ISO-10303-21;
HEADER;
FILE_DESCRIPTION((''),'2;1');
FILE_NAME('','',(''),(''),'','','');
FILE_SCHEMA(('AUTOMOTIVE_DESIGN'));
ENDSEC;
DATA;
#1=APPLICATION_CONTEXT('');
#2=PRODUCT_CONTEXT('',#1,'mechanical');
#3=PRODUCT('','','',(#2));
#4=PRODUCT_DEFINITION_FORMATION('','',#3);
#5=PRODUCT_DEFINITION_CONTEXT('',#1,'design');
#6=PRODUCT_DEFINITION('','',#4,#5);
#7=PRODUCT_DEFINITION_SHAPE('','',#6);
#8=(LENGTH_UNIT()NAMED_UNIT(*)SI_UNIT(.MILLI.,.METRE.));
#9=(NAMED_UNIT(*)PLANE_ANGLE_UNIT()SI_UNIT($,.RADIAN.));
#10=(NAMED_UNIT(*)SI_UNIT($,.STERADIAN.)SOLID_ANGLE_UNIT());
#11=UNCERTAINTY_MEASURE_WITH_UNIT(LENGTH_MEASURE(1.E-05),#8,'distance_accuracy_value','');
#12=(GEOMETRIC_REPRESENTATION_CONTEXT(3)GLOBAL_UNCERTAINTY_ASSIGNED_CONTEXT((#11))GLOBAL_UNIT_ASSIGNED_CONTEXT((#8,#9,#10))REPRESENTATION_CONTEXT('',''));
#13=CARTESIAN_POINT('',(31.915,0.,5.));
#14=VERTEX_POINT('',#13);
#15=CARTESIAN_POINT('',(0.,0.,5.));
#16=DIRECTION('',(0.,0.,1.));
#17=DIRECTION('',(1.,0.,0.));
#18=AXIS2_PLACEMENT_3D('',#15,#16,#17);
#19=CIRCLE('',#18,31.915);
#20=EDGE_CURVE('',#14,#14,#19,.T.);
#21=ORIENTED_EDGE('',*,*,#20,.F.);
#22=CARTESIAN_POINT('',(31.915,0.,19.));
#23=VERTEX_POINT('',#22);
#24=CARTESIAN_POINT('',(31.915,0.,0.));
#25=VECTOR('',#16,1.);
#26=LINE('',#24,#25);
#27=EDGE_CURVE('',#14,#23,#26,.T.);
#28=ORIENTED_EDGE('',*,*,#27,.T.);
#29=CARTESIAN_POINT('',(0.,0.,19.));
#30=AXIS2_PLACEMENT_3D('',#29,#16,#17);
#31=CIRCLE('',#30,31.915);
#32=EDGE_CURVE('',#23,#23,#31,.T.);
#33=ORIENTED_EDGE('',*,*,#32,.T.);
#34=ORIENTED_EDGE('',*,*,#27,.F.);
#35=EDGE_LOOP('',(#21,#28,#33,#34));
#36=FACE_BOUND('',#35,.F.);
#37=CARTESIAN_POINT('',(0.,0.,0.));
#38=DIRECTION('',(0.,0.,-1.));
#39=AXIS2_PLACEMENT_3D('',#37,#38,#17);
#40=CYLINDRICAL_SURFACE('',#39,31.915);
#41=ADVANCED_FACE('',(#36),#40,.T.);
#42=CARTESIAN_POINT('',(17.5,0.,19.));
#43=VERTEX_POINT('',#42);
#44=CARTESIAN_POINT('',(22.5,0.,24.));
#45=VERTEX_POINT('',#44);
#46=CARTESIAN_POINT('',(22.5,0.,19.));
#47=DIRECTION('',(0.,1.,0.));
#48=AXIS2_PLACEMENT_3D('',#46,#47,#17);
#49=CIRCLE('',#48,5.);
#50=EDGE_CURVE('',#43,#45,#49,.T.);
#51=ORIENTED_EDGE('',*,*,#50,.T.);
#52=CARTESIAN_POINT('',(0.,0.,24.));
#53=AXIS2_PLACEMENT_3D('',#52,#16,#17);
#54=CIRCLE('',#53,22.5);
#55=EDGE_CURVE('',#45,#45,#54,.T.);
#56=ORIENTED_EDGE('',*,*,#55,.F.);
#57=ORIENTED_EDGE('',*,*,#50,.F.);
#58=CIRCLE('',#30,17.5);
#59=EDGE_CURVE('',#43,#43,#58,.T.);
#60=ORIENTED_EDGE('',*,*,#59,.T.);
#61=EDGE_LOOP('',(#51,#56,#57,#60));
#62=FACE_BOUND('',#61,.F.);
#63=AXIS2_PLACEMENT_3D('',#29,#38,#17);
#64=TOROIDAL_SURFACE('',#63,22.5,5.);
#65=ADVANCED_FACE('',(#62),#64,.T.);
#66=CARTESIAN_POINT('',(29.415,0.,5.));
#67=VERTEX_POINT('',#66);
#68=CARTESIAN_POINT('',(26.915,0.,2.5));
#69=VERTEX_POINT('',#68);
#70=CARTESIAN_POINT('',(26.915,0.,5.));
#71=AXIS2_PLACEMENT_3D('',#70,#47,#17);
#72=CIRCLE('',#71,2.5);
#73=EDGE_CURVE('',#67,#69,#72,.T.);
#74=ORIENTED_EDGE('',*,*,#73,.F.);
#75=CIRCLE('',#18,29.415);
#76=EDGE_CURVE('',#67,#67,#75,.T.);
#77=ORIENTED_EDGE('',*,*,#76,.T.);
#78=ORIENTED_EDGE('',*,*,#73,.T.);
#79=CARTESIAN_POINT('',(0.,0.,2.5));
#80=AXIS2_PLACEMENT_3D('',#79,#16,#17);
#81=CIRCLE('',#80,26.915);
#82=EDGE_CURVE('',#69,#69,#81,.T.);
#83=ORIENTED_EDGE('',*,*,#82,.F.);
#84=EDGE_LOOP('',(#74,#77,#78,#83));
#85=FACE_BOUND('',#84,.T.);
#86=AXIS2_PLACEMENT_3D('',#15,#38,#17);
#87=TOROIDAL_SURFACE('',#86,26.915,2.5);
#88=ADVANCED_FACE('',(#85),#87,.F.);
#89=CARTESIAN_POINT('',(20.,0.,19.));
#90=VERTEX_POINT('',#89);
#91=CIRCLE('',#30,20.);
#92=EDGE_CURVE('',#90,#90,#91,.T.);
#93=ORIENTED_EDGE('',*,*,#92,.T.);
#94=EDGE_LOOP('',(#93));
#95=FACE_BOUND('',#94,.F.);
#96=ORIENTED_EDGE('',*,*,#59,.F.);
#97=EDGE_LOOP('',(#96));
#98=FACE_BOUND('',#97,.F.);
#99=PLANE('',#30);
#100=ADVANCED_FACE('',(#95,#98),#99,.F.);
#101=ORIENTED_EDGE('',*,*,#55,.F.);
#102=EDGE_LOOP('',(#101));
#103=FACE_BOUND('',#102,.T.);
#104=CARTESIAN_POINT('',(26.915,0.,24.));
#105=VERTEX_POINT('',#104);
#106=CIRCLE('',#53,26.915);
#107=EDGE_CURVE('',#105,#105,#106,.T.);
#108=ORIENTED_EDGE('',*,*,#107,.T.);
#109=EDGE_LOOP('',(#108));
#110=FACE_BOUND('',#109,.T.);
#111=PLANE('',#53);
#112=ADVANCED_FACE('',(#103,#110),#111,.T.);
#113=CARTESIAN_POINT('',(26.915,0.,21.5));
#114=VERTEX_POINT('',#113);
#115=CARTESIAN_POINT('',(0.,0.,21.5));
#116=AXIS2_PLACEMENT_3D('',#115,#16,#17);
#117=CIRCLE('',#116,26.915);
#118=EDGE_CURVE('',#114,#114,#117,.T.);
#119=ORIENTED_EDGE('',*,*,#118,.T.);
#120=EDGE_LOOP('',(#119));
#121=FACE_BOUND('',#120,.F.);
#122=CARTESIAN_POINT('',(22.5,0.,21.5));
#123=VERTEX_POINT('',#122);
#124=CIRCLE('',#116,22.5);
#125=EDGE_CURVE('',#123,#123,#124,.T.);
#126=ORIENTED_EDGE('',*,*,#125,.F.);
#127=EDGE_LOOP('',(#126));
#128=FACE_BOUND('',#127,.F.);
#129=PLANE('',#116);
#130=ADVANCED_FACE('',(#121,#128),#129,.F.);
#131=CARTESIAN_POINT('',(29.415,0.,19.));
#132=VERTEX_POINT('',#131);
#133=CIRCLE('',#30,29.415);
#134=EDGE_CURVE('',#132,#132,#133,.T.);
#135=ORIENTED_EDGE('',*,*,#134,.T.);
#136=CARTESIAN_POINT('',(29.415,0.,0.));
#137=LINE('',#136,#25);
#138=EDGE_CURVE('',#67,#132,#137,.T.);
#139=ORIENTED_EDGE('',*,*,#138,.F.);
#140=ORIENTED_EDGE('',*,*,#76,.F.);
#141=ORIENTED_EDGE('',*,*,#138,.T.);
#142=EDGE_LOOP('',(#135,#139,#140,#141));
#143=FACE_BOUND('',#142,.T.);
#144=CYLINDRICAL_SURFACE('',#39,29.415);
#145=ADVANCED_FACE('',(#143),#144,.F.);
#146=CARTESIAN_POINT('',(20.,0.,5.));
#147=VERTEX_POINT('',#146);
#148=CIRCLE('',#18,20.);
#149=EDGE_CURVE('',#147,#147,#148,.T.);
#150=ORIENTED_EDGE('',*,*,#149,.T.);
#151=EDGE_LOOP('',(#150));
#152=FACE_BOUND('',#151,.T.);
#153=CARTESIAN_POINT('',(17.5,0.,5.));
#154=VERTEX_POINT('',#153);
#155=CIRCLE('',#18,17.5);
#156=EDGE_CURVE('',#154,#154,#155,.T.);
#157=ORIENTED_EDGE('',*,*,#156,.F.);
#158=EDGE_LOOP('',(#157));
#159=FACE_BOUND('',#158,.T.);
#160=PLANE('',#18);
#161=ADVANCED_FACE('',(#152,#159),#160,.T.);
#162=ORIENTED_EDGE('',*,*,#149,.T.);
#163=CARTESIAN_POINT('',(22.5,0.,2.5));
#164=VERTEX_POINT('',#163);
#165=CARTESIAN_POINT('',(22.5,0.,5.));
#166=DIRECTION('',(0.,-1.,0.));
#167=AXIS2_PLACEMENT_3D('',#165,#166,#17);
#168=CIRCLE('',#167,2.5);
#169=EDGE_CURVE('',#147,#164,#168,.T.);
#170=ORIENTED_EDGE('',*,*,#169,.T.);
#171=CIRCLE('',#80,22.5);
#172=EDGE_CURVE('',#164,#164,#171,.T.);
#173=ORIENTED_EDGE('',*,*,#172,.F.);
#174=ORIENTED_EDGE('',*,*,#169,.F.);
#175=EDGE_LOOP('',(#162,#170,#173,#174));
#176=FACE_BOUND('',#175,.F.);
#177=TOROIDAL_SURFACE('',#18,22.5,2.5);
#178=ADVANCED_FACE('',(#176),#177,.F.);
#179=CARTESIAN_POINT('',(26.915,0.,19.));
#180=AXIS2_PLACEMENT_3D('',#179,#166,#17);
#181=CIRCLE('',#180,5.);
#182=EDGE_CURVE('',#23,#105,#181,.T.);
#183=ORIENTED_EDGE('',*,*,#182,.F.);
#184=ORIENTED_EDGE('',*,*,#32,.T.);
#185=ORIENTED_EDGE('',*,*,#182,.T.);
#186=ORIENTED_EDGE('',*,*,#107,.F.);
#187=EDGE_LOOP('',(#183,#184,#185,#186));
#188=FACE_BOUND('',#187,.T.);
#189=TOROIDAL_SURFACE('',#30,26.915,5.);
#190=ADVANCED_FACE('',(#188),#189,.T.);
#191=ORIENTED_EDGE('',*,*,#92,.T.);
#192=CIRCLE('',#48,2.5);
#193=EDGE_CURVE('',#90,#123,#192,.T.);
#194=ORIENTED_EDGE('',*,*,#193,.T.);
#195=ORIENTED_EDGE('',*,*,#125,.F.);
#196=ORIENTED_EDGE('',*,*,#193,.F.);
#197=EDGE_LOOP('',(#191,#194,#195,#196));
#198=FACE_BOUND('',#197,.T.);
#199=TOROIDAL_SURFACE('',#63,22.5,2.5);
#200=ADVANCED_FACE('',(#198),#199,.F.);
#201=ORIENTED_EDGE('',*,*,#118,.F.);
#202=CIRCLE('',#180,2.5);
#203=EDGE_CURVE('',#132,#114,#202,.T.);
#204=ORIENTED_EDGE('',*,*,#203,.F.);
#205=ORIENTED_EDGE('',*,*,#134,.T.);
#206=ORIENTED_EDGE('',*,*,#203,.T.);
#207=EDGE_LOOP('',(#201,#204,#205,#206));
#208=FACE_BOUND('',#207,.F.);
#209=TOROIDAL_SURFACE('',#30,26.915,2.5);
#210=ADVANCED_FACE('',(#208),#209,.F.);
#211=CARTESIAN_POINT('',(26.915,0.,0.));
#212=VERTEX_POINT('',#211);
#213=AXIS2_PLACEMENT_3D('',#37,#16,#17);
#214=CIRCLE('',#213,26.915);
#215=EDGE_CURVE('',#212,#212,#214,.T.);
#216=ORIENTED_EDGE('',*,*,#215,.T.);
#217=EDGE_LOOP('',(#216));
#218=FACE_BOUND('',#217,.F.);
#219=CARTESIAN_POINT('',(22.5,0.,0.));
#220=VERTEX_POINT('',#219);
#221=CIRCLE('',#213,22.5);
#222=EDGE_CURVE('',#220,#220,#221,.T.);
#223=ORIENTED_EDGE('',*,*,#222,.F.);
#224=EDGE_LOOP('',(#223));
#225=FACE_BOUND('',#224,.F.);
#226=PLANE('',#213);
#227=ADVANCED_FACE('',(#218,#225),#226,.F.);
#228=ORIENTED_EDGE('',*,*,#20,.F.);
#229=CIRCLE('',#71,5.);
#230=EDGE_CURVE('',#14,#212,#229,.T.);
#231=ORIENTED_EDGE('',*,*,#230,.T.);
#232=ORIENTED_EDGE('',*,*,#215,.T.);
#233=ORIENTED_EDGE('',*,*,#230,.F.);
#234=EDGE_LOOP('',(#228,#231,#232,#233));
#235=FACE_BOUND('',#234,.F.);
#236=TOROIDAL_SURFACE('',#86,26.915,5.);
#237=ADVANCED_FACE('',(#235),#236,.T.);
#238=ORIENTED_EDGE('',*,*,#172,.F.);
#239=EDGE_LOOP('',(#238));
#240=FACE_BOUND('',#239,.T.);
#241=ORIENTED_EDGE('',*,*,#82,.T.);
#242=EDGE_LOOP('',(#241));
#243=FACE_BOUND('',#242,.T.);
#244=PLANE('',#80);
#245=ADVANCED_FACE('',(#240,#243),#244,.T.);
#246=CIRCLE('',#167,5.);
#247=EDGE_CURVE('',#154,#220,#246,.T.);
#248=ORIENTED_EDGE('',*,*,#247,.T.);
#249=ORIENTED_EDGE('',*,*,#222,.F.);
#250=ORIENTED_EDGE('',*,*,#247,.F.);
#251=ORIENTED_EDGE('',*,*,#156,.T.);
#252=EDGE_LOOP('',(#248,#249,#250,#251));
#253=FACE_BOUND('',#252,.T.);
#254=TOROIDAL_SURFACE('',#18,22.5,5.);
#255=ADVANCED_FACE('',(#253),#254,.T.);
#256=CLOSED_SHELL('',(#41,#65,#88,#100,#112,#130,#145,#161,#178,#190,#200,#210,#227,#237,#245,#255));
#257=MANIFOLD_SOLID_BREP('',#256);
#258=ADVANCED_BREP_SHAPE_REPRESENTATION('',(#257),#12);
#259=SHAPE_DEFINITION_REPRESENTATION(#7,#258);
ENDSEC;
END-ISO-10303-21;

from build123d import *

# Parameters (mm, degrees)
F0_R     = 31.915
F0_R_2   = 17.5
F1_DEPTH = 24
F2_R     = 5
F3_T     = 2.5


# Not quite as in the source:
# - a shell that OpenCascade refuses in one call is made with other operations: the cavity is built on its own and cut out


with BuildPart() as f1:
    # F0 (on Top) → F1 (new body)
    with BuildSketch(Plane.XY):
        Circle(F0_R)
        Circle(F0_R_2, mode=Mode.SUBTRACT)
    extrude(amount=F1_DEPTH)

    # F2
    f2_edges = [f1.edges().sort_by_distance(p)[0] for p in [
        (-31.915, 0, 24),
        (-17.5, 0, 24),
        (-31.915, 0, 0),
        (-17.5, 0, 0),
    ]]
    fillet(f2_edges, radius=F2_R)

    # F3: shell of thickness 2.5, made by hand


with BuildPart() as f3_core1:
    # F3_t2: copy of F1
    add(f1.part)

    # the walls: a layer under each face that stays
    f3_faces = [f3_core1.faces().sort_by_distance(p)[0] for p in [
        (-31.915, 0, 12),
        (-30.4505339059, 0, 1.4644660941),
        (-30.4505339059, 0, 22.5355339059),
        (-17.9433333333, -17.9433333333, 0),
        (-17.9433333333, -17.9433333333, 24),
        (-18.9644660941, 0, 1.4644660941),
        (-18.9644660941, 0, 22.5355339059),
    ]]
    thicken(f3_faces, amount=-F3_T, mode=Mode.SUBTRACT)


with BuildPart() as f1_1:
    add(f1.part)

    # what is left inside the walls is the cavity
    f3_cavity = [f3_core1.part.solids().sort_by_distance(p)[0] for p in [
        (-29.39, 0, 14.333333),
    ]]
    add(f3_cavity, mode=Mode.SUBTRACT)


solid = f1_1.part
